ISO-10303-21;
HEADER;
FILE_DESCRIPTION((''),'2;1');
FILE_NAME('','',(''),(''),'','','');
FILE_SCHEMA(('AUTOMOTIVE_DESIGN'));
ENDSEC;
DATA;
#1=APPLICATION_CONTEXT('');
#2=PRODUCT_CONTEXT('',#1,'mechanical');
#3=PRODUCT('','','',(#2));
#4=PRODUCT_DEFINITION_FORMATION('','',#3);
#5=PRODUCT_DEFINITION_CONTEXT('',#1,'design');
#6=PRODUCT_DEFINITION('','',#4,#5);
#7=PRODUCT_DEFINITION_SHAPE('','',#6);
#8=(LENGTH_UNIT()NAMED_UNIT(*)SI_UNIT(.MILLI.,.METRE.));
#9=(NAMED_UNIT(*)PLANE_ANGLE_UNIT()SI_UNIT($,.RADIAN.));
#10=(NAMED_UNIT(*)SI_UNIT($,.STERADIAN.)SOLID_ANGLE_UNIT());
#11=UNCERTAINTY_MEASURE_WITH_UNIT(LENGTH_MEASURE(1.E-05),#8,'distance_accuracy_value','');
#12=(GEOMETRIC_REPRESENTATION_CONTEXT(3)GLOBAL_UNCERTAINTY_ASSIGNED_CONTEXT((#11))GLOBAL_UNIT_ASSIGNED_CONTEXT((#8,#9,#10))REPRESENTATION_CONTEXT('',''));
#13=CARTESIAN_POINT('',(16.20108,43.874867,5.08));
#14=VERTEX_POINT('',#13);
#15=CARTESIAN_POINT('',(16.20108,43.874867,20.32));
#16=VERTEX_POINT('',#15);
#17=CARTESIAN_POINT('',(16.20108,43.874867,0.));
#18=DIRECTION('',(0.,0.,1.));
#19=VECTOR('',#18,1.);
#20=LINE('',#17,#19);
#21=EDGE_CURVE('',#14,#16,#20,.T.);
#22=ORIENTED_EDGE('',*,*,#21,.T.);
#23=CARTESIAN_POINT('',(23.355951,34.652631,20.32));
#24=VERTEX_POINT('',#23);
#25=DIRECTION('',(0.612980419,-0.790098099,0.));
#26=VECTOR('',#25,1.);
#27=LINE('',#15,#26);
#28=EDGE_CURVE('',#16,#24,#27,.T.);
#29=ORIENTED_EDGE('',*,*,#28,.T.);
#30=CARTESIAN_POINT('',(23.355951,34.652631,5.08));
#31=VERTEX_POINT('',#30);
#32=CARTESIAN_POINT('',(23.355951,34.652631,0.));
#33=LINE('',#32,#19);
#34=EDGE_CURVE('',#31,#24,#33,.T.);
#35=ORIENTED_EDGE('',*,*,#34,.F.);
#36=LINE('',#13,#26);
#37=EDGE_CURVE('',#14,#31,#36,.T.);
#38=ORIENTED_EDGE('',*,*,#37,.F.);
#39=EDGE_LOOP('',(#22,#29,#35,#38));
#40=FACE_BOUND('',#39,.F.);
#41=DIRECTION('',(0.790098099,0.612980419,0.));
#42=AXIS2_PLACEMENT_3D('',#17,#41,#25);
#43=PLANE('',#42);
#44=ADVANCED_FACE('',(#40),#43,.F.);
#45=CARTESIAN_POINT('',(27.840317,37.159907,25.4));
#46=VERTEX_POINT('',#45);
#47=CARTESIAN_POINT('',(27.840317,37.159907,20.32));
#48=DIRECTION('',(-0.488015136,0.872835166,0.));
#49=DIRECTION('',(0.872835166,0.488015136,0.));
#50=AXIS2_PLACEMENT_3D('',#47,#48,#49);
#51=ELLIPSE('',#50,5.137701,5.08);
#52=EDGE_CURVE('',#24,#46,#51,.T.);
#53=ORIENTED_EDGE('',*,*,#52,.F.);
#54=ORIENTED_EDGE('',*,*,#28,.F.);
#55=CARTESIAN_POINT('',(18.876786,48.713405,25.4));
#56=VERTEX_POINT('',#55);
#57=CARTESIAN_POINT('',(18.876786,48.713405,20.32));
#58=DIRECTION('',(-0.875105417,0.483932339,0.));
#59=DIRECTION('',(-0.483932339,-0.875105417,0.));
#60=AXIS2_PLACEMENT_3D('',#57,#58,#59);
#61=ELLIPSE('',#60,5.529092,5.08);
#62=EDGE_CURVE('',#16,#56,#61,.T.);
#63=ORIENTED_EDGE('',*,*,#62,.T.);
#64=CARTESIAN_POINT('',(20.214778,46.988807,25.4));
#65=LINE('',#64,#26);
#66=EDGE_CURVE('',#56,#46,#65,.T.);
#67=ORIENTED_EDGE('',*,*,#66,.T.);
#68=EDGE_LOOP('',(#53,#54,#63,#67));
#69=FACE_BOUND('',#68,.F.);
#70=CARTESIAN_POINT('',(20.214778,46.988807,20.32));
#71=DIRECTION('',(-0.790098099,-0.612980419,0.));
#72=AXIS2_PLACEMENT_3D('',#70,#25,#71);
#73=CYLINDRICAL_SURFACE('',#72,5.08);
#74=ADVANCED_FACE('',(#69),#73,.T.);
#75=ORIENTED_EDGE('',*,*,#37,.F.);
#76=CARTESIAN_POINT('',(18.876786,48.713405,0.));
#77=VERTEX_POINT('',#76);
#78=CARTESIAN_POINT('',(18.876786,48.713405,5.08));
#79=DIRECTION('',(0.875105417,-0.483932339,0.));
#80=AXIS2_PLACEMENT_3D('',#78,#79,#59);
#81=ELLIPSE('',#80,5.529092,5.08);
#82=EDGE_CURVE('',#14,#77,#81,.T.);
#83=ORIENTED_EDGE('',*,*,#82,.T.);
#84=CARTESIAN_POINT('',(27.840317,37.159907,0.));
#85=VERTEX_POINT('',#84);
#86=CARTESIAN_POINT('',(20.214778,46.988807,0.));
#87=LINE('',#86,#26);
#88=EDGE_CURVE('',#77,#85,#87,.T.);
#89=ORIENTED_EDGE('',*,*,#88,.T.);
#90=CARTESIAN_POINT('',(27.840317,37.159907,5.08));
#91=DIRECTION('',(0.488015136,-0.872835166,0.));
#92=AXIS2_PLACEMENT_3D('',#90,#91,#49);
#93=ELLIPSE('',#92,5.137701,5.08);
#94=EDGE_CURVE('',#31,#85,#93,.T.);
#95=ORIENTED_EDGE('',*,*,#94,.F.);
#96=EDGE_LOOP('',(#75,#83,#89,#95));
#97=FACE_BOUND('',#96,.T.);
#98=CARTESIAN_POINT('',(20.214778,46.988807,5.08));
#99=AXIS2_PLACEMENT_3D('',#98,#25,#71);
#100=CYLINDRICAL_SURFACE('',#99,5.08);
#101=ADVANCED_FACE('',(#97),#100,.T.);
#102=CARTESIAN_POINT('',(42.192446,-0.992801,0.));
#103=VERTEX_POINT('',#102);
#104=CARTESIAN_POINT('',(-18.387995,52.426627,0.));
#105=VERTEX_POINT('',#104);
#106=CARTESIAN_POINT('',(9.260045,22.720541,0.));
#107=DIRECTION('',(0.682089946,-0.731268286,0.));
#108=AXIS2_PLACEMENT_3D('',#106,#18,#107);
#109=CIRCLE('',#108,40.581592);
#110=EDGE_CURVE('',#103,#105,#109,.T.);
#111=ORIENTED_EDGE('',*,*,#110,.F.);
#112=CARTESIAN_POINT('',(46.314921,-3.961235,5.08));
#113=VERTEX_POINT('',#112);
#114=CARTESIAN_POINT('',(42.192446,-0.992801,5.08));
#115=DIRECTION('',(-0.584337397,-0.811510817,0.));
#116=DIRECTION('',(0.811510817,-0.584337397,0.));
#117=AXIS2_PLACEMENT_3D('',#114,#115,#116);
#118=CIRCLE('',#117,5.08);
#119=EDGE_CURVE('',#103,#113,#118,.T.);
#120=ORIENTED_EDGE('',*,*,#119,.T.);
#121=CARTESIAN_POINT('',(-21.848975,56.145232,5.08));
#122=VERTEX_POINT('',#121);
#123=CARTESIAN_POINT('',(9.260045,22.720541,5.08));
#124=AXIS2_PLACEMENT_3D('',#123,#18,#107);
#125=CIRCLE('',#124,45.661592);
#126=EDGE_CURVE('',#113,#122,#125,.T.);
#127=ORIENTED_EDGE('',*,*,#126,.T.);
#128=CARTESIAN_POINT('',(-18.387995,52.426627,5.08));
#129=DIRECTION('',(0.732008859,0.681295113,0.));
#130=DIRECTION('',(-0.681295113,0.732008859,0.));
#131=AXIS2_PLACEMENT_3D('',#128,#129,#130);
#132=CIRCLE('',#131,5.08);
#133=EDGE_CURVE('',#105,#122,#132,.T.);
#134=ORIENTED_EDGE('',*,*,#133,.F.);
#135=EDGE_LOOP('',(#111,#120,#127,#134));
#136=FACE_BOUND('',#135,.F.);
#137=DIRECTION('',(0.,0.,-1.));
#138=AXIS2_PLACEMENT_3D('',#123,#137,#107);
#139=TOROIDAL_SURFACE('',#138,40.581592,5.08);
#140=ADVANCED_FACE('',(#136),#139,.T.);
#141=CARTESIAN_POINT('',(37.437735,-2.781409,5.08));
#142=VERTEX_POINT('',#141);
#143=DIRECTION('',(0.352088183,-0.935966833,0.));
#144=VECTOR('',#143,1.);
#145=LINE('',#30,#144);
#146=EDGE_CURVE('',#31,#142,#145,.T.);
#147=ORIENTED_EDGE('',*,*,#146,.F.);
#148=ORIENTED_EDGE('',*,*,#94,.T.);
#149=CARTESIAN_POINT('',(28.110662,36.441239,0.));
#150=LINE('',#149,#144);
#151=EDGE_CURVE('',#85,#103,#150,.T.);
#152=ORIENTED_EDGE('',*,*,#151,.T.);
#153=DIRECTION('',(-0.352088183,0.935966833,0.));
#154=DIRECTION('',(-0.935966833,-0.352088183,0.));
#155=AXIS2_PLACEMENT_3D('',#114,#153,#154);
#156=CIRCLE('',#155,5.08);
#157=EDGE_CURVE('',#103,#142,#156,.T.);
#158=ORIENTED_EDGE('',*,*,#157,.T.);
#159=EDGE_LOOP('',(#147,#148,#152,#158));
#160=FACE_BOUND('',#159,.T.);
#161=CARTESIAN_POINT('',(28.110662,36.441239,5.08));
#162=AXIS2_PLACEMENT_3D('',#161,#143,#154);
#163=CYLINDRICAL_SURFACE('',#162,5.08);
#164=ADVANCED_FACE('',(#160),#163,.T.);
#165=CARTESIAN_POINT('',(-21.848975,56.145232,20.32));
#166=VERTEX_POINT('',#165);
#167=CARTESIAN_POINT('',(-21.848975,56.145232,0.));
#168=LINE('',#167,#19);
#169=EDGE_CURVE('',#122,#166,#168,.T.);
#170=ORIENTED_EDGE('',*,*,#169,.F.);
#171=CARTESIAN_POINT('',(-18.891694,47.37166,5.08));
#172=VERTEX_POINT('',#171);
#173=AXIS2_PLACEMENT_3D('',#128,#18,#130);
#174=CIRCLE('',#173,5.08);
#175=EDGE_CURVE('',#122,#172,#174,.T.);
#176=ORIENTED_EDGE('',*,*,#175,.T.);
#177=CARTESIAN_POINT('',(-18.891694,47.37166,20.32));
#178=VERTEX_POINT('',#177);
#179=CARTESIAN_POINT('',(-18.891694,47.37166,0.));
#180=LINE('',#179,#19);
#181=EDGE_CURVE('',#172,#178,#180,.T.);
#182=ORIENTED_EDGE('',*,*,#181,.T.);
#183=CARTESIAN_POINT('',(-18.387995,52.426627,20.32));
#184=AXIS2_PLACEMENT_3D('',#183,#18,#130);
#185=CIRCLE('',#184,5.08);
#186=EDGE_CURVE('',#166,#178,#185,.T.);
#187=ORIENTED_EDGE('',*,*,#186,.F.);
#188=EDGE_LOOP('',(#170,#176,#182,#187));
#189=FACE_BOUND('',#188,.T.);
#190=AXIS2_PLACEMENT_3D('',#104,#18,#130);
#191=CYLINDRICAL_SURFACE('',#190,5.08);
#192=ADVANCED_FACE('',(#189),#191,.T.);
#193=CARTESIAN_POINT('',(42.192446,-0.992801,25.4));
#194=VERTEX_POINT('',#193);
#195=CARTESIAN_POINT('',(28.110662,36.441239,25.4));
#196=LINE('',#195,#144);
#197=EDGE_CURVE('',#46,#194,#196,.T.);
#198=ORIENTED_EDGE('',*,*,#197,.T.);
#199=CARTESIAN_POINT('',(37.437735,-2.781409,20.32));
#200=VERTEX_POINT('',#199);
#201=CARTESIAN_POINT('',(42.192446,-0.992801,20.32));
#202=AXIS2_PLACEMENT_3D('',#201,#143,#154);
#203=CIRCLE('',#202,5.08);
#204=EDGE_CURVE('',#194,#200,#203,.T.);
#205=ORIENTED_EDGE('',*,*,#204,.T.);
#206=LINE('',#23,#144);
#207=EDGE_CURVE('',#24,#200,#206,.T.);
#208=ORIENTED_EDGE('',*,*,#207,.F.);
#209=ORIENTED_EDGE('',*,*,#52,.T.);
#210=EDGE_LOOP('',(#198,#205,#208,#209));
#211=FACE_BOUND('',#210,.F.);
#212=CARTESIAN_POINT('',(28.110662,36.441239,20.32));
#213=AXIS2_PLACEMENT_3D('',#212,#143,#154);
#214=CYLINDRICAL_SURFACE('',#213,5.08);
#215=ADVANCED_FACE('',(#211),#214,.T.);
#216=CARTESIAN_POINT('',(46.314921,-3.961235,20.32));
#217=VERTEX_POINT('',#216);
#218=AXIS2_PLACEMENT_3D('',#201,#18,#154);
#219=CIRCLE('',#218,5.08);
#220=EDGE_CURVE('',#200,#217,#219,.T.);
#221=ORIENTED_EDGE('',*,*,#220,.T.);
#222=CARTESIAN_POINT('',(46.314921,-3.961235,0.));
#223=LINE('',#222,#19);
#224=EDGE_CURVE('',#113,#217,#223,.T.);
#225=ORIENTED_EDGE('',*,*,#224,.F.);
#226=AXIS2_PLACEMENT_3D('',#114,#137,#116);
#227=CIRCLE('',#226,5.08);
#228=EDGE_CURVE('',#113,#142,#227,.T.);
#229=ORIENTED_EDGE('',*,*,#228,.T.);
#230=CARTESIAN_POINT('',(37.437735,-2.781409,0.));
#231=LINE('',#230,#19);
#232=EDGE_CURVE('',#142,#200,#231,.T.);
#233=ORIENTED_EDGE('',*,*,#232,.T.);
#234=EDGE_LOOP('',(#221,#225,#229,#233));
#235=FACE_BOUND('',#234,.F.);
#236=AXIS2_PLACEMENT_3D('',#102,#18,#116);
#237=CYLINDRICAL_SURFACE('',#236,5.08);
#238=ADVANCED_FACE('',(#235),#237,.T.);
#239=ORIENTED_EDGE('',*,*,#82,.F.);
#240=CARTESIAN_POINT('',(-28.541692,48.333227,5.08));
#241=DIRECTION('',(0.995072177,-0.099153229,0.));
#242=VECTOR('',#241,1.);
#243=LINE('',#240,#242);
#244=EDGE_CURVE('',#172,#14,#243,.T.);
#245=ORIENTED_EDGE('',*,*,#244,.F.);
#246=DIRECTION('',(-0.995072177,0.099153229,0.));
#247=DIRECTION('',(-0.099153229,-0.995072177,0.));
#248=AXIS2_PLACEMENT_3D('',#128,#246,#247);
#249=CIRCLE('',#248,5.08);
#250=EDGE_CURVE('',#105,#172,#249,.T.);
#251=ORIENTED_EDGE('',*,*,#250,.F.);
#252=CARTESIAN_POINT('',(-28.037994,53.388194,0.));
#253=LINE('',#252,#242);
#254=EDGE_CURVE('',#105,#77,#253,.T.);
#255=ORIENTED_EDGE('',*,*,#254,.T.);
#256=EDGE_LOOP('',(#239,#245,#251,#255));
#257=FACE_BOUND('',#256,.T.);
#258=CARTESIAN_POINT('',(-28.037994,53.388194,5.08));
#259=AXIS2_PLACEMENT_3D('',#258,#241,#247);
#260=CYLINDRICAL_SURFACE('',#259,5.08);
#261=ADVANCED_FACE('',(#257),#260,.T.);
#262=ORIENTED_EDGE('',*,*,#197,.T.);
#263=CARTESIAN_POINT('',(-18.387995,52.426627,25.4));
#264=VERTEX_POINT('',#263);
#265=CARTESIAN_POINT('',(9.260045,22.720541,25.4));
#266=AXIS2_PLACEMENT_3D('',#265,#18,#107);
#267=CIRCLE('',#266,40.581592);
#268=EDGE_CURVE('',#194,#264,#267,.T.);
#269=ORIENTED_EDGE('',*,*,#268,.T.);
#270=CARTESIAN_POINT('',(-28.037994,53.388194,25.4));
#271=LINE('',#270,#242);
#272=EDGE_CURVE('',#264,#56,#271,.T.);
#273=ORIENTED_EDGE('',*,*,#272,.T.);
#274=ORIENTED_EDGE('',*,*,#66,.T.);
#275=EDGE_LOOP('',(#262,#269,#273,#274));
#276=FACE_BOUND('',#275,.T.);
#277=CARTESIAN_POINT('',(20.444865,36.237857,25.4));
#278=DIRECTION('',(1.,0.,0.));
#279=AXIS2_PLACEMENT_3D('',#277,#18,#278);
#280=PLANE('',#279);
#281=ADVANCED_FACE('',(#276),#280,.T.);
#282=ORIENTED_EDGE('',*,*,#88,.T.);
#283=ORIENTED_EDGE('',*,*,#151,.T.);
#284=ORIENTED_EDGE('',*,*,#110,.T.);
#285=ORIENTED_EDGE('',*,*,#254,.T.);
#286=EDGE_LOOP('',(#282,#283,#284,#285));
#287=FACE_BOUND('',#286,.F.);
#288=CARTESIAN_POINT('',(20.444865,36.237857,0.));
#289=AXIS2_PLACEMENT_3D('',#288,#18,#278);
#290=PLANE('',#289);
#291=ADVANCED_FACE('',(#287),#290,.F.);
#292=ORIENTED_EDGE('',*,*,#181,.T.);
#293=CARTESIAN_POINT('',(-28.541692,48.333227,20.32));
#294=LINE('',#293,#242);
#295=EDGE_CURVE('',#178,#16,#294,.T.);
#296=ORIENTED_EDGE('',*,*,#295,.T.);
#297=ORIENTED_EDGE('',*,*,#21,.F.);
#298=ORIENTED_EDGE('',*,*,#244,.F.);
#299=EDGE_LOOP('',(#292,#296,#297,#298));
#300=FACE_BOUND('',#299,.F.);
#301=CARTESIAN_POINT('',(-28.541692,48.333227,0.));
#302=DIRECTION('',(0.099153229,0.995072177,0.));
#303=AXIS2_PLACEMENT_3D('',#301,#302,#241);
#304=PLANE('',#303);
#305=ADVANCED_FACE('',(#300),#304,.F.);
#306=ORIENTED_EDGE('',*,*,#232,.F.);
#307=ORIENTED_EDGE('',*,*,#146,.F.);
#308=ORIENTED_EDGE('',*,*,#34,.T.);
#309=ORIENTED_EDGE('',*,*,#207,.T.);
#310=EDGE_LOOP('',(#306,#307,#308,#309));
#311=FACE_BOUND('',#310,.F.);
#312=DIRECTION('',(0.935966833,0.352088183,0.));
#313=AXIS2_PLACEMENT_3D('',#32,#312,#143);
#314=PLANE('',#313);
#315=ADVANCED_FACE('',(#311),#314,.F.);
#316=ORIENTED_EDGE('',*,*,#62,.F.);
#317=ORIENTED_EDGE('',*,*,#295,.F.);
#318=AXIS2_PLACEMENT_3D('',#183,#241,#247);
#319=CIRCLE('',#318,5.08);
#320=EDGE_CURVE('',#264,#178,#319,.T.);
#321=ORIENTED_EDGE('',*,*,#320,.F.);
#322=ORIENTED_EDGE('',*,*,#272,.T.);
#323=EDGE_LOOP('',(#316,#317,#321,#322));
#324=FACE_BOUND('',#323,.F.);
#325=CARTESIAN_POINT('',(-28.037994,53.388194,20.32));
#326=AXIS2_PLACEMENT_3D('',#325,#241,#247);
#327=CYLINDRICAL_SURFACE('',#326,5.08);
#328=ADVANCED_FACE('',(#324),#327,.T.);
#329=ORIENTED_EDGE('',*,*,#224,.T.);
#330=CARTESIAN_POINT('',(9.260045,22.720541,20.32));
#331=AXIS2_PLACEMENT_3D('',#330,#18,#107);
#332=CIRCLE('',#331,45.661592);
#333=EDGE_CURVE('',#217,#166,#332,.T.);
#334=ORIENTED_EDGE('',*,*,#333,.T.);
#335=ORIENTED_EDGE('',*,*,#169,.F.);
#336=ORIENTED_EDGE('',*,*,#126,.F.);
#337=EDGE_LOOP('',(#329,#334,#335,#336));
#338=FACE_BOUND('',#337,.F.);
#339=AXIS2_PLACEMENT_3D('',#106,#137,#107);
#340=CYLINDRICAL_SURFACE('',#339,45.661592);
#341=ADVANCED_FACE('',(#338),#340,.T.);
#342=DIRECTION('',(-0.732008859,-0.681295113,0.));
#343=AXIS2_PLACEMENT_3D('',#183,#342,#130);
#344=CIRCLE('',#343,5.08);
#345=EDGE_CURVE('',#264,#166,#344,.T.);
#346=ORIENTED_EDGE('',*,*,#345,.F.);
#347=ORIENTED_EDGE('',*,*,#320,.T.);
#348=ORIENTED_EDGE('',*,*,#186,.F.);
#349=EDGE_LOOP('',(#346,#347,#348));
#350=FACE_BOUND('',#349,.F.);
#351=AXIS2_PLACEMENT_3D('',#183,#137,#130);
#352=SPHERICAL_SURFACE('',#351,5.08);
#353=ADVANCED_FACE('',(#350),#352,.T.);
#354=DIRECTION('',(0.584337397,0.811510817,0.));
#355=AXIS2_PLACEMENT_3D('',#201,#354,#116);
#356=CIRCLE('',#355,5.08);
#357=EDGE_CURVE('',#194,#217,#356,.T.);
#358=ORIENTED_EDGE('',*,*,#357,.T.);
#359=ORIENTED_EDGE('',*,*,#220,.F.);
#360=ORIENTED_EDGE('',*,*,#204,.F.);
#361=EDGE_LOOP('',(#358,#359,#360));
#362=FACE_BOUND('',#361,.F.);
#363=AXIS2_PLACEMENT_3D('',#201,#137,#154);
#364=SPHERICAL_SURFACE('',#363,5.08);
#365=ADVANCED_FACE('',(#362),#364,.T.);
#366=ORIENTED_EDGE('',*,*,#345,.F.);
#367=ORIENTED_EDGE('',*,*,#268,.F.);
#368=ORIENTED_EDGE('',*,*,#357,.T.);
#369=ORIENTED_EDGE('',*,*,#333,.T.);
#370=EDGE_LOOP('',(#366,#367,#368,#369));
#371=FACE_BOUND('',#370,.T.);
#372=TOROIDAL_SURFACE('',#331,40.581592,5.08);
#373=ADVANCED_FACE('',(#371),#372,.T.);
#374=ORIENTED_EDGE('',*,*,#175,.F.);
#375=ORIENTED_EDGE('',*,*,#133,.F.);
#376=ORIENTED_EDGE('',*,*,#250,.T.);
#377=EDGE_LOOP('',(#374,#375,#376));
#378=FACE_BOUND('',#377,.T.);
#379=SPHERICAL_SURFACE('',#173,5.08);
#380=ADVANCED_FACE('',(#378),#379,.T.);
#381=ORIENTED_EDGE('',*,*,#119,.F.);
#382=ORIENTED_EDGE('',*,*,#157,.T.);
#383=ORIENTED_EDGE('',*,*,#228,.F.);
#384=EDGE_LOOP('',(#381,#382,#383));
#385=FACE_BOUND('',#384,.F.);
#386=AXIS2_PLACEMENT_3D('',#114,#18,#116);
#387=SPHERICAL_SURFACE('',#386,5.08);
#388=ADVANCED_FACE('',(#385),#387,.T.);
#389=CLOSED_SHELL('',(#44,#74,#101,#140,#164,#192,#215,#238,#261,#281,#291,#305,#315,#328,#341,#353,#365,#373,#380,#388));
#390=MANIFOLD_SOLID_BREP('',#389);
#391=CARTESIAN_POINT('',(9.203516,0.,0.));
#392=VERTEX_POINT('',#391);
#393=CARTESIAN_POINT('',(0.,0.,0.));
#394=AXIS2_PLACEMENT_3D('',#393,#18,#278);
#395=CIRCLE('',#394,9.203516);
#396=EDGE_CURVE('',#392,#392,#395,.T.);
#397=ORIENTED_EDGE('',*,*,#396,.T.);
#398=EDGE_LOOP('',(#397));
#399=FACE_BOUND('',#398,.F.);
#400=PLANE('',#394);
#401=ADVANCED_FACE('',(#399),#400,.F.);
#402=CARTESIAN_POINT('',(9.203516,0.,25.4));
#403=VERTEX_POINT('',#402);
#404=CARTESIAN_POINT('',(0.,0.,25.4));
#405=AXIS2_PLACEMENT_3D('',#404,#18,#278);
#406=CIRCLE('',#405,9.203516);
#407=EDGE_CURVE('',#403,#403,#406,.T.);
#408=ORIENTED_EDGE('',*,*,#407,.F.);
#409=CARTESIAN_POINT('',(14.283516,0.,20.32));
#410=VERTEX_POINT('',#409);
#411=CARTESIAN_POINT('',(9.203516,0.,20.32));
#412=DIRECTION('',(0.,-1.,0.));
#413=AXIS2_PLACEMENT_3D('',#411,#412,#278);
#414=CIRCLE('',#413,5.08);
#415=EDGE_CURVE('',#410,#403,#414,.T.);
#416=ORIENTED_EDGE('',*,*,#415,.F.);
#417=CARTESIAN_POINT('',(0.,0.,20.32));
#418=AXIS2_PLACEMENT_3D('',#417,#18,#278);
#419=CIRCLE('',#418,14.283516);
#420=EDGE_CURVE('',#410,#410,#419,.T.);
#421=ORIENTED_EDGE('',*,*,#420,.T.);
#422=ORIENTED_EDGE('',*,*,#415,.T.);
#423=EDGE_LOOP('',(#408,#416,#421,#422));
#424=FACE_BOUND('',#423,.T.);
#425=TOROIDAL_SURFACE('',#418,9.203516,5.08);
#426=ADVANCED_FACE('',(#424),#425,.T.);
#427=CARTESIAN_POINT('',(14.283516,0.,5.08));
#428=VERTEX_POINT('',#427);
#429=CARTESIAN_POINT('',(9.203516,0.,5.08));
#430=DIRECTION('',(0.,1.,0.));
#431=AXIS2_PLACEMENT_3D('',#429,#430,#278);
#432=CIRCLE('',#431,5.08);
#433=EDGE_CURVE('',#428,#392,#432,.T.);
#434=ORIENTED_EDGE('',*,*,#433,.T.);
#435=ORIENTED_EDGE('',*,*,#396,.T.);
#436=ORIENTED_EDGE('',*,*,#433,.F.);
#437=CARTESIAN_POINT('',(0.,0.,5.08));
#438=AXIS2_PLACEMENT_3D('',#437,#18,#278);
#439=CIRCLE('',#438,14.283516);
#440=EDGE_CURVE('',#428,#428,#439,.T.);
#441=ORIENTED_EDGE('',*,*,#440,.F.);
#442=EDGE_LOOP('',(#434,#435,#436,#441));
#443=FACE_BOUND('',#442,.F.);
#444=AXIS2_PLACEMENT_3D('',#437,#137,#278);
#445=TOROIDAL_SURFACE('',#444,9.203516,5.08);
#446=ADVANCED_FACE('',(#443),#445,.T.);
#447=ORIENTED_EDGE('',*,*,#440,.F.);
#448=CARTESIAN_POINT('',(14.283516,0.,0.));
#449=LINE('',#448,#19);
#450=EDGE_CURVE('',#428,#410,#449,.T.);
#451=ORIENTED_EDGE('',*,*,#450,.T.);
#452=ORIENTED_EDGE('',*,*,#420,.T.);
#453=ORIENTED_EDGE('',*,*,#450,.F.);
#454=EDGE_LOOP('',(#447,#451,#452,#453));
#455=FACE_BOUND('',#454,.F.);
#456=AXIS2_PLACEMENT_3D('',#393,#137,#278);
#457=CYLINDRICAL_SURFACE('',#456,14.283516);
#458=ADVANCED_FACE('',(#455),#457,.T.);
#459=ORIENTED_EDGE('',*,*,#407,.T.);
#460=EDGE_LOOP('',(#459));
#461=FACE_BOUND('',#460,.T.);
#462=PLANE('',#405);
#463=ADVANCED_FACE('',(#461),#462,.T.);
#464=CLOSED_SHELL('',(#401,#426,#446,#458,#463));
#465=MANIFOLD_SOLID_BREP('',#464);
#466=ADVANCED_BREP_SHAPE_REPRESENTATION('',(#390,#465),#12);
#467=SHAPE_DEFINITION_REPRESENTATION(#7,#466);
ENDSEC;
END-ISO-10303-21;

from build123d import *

# Parameters (mm, degrees)
F1_DEPTH = 25.4
F0_R     = 14.2835162245
F3_R     = 5.08
F4_R     = 5.08


# Not quite as in the source:
# - a feature of the source that left no trace in its solid (it failed there, or was rolled back) is left out


with BuildPart() as f1:
    # F0 (on Top) → F1 (new body)
    with BuildSketch(Plane.XY):
        with BuildLine():
            ThreePointArc((40.4053583261, -10.6703329711), (38.948965984, 57.412745276), (-28.5416923943, 48.3332269014))
            Line((-28.5416923943, 48.3332269014), (16.2010799613, 43.8748665274))
            Line((16.2010799613, 43.8748665274), (23.3559507397, 34.6526309968))
            Line((23.3559507397, 34.6526309968), (40.4053583261, -10.6703329711))
        make_face()
    extrude(amount=F1_DEPTH)

    # F4
    f4_edges = [f1.edges().sort_by_distance(p)[0] for p in [
        (38.948966, 57.412745, 0),
        (19.778515, 39.263749, 0),
        (31.880655, 11.991149, 0),
        (-6.170306, 46.104047, 0),
        (19.778515, 39.263749, 25.4),
        (40.405358, -10.670333, 12.7),
        (31.880655, 11.991149, 25.4),
        (-28.541692, 48.333227, 12.7),
        (38.948966, 57.412745, 25.4),
        (-6.170306, 46.104047, 25.4),
    ]]
    fillet(f4_edges, radius=F4_R)


with BuildPart() as f1b:
    # F0 (on Top) → F1, piece 2 (new body)
    with BuildSketch(Plane.XY):
        Circle(F0_R)
    extrude(amount=F1_DEPTH)

    # F3
    f3_edges = [f1b.edges().sort_by_distance(p)[0] for p in [
        (-14.283516, 0, 0),
        (-14.283516, 0, 25.4),
        (14.283516, 0, 12.7),
    ]]
    fillet(f3_edges, radius=F3_R)


solid = Compound([f1.part, f1b.part])
